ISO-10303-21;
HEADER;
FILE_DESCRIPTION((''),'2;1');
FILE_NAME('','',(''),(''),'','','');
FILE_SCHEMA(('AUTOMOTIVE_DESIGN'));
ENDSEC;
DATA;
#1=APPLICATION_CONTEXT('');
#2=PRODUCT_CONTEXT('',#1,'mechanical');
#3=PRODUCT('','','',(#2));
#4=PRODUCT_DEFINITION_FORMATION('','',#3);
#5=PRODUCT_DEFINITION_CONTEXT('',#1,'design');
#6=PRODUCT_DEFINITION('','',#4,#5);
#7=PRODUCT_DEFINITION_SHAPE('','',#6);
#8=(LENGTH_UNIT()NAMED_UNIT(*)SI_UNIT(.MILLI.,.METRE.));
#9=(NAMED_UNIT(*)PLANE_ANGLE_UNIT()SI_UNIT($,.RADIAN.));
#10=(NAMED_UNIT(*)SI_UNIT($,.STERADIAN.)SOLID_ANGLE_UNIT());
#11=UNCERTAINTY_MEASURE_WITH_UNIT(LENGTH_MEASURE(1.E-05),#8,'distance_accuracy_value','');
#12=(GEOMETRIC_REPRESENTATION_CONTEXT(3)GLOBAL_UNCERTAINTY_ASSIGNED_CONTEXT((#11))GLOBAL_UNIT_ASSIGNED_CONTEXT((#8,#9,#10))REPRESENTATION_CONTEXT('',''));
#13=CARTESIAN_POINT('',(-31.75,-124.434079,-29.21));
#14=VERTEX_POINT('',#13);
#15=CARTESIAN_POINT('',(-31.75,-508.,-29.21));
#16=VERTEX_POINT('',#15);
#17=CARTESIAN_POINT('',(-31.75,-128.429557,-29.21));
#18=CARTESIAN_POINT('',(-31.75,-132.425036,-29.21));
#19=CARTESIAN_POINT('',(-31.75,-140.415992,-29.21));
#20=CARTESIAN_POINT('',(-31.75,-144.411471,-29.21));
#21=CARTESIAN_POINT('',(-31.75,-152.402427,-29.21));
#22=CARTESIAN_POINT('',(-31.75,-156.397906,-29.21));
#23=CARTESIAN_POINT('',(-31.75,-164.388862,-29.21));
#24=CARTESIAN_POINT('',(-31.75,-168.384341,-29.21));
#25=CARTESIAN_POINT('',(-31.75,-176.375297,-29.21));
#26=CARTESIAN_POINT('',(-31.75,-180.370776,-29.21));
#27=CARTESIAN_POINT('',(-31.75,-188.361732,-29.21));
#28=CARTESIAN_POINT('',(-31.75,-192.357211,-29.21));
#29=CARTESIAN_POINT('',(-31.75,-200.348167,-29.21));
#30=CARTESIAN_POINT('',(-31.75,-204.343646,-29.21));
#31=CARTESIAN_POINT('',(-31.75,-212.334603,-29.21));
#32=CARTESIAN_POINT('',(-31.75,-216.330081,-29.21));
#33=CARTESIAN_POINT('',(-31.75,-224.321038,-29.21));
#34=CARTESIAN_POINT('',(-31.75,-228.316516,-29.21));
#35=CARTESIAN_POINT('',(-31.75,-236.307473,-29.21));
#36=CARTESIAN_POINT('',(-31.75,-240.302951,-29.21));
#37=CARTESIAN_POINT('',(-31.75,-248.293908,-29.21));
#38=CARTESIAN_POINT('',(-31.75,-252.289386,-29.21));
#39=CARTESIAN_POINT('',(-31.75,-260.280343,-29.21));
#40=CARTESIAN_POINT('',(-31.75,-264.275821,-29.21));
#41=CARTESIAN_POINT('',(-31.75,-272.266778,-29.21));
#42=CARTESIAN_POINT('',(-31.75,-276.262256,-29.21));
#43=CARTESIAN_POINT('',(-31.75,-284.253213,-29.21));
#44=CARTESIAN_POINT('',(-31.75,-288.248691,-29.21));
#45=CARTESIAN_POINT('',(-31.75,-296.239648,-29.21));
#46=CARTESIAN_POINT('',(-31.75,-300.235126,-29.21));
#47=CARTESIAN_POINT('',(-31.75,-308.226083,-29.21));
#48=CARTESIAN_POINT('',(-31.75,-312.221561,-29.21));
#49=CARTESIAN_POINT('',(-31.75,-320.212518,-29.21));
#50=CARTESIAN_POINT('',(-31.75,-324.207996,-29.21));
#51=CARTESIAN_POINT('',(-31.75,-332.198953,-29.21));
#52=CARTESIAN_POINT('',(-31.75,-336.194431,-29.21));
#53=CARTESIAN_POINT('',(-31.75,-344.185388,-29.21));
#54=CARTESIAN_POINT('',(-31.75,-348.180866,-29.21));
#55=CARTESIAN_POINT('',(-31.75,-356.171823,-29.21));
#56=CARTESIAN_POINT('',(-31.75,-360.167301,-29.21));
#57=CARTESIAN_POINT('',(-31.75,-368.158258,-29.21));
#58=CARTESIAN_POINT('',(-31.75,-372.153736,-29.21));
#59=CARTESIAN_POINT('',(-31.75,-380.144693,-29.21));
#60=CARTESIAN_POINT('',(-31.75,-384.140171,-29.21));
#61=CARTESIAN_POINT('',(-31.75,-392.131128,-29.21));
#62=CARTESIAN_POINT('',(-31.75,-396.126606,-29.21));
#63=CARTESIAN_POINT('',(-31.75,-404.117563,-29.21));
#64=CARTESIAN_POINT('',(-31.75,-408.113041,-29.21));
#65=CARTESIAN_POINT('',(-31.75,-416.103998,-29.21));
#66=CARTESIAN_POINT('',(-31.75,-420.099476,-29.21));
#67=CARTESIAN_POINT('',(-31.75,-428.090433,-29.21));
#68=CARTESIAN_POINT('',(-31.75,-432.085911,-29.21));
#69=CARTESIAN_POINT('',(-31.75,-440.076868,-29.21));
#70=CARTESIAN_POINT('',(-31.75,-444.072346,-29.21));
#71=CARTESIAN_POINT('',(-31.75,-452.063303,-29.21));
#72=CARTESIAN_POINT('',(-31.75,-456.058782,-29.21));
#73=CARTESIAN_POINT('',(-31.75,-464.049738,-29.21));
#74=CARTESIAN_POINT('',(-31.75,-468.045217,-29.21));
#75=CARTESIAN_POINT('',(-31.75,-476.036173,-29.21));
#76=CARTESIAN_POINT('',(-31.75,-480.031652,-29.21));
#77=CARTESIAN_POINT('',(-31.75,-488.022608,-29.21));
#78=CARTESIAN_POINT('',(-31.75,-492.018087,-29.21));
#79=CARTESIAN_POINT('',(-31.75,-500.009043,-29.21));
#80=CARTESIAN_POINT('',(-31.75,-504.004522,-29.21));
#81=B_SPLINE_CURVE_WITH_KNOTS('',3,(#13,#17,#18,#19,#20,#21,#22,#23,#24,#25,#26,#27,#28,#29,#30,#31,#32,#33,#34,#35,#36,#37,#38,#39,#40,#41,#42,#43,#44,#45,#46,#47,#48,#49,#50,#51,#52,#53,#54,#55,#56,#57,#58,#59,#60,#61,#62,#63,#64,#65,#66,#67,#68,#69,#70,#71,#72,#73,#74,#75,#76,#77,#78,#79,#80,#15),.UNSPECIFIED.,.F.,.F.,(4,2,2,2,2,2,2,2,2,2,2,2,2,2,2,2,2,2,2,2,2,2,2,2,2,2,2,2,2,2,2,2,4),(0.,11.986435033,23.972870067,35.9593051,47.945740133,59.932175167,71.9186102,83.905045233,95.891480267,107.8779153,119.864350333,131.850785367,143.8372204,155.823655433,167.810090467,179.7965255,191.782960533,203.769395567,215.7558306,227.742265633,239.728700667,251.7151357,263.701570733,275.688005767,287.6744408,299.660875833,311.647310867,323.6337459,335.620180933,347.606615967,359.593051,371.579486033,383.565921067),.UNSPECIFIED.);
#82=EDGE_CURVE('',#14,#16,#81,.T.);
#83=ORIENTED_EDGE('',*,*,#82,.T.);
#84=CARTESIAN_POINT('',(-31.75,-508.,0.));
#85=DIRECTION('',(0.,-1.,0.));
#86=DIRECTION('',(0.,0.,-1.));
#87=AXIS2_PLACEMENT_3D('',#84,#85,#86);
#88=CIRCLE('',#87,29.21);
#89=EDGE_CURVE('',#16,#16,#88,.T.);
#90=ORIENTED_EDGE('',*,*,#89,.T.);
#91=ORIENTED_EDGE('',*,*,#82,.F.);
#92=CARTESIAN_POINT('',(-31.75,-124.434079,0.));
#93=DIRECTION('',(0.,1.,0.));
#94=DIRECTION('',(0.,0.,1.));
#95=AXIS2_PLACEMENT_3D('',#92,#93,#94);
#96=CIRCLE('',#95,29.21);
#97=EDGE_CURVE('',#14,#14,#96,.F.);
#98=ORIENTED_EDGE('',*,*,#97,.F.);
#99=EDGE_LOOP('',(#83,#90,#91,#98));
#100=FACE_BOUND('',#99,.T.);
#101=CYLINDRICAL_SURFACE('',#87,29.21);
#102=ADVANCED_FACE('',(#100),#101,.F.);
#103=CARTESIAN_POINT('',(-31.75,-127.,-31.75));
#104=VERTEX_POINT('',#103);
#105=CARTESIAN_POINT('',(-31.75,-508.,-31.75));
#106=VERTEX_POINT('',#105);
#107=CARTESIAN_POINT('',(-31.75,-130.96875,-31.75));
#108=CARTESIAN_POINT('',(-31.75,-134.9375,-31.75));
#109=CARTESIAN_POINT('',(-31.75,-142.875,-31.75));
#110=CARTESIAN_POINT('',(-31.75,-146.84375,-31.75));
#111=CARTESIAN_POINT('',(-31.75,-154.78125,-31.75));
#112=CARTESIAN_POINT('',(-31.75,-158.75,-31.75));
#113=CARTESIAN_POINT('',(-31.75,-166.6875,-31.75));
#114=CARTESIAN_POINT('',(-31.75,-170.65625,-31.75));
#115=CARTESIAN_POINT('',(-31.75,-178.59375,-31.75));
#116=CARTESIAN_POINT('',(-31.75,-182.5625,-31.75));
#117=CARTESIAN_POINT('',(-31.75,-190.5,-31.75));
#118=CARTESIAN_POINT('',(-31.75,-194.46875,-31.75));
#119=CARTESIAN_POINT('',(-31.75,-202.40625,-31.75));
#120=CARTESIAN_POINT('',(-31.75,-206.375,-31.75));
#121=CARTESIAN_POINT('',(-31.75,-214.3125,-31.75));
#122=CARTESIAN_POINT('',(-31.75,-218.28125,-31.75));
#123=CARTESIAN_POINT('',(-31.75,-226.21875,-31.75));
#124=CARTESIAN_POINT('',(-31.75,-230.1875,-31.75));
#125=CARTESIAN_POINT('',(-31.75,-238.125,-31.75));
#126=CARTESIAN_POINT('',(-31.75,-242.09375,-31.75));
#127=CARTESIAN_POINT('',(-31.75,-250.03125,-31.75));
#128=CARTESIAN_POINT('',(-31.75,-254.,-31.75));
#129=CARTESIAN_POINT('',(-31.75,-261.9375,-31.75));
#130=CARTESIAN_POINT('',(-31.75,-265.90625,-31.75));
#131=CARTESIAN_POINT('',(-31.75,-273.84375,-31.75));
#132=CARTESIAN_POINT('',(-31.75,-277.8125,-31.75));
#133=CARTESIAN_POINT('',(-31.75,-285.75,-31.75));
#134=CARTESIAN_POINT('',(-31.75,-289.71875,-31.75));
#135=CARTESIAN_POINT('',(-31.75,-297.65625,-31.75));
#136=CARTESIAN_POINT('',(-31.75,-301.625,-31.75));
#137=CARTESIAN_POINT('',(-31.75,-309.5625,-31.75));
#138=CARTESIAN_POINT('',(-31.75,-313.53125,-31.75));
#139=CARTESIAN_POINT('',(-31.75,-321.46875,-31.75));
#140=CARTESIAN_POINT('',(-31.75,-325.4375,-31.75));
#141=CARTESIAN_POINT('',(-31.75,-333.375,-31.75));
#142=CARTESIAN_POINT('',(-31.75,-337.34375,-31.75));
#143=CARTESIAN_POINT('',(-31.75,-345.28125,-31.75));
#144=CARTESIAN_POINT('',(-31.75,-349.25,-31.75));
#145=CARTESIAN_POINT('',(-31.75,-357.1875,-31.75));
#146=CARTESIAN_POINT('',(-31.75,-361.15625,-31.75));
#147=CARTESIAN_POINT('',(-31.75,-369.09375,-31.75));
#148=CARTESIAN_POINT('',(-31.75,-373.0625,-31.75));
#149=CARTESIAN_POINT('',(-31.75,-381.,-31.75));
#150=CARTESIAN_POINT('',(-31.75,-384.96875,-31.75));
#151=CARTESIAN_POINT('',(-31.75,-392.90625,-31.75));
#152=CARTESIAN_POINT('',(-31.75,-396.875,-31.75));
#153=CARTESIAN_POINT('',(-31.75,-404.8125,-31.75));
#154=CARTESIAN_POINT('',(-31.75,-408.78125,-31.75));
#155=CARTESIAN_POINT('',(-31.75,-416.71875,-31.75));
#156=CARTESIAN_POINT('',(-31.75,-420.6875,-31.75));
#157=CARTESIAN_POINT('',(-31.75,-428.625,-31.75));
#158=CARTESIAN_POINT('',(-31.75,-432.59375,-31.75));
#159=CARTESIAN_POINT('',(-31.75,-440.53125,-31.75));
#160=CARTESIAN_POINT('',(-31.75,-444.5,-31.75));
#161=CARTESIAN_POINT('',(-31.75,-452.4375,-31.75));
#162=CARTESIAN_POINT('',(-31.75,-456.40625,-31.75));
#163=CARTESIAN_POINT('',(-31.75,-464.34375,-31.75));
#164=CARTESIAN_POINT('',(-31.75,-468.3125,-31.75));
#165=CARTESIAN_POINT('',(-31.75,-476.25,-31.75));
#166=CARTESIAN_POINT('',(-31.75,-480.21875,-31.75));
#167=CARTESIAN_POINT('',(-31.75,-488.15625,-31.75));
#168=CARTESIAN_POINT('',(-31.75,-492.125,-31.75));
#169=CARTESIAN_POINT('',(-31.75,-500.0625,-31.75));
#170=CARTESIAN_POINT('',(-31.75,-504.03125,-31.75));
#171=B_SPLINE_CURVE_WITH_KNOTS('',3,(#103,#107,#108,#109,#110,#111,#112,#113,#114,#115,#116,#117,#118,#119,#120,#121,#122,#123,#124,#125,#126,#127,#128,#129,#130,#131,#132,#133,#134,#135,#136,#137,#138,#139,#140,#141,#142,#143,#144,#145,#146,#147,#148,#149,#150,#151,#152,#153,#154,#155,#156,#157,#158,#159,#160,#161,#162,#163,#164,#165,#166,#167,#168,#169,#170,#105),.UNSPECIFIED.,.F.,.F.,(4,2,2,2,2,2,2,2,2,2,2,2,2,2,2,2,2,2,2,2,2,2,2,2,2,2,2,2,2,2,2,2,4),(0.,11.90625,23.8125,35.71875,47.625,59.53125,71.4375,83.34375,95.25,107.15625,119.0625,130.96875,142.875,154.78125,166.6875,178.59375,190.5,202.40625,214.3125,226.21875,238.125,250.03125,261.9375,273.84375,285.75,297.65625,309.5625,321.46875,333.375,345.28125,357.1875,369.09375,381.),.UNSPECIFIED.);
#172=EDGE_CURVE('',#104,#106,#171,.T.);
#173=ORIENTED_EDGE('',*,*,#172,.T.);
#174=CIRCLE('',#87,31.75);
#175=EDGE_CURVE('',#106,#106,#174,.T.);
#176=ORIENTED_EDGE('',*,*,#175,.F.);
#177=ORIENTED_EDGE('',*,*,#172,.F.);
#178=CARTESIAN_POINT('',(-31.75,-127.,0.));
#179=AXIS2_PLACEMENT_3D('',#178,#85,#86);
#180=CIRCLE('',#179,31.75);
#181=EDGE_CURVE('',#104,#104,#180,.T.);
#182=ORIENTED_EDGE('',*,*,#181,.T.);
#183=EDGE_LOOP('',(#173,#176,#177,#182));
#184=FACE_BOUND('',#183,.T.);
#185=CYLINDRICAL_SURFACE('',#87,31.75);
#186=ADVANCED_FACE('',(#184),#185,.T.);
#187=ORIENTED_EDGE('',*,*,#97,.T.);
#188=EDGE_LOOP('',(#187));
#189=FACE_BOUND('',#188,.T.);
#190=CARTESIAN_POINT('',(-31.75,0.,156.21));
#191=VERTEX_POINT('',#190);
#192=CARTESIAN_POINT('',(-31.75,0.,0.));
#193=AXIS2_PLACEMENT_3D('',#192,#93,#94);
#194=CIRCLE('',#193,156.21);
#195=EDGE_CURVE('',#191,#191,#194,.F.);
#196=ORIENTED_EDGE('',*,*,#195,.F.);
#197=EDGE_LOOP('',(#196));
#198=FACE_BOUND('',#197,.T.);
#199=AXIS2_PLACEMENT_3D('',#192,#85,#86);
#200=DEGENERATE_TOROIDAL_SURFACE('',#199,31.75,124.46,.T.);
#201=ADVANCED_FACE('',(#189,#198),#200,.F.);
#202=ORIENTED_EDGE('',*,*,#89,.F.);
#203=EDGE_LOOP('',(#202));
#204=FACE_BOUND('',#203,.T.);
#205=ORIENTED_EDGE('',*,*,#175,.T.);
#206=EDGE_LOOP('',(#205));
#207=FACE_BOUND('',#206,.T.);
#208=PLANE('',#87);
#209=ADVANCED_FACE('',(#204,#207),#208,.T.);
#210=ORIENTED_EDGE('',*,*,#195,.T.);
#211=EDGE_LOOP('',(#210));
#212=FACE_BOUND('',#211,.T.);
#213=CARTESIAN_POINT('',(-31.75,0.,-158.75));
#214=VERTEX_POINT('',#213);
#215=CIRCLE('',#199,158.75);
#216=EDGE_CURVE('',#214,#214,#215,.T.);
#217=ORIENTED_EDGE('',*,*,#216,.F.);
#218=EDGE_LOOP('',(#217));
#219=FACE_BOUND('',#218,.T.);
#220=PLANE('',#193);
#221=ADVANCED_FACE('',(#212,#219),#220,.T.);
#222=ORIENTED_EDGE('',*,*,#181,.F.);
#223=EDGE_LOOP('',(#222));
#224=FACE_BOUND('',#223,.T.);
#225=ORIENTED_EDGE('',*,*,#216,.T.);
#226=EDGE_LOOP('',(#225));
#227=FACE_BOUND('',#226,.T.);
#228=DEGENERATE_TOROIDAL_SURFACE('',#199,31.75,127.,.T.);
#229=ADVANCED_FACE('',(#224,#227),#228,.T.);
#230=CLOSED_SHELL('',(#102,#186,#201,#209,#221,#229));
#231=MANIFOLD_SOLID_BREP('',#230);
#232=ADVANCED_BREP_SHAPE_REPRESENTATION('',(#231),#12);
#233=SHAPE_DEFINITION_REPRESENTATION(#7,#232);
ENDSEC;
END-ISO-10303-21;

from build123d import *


# Read off the part's stored shape, not the designer's step: Shell1
with BuildPart() as part:
    # Sketch1 → Revolve1 (revolve)
    with BuildSketch(Plane.XY, mode=Mode.PRIVATE) as revolve1_sk:
        with BuildLine():
            Line((-31.75, -508), (0, -508))
            Line((0, -508), (0, -127))
            ThreePointArc((0, -127), (89.802561211, -89.802561211), (127, 0))
            Line((127, 0), (-31.75, 0))
            Line((-31.75, 0), (-31.75, -508))
        make_face()
    revolve(revolve1_sk.sketch.rotate(Axis((-31.75, -508, 0), (0, 1, 0)), 90), axis=Axis((-31.75, -508, 0), (0, 1, 0)))

    # Shell1 outline → Shell1 (revolve, cut)
    with BuildSketch(Plane(origin=(-31.75, 0, 0), x_dir=(1, 0, 0), z_dir=(0, 0, 1))):
        with BuildLine():
            Line((156.21, 0), (0, 0))
            Line((0, 0), (0, -508))
            Line((0, -508), (29.21, -508))
            Line((29.21, -508), (29.21, -124.434078933))
            ThreePointArc((29.21, -124.434078933), (118.853855253, -88.9), (156.21, 0))
        make_face()
    revolve(axis=Axis((-31.75, 0, 0), (0, 1, 0)), mode=Mode.SUBTRACT)


solid = part.part
